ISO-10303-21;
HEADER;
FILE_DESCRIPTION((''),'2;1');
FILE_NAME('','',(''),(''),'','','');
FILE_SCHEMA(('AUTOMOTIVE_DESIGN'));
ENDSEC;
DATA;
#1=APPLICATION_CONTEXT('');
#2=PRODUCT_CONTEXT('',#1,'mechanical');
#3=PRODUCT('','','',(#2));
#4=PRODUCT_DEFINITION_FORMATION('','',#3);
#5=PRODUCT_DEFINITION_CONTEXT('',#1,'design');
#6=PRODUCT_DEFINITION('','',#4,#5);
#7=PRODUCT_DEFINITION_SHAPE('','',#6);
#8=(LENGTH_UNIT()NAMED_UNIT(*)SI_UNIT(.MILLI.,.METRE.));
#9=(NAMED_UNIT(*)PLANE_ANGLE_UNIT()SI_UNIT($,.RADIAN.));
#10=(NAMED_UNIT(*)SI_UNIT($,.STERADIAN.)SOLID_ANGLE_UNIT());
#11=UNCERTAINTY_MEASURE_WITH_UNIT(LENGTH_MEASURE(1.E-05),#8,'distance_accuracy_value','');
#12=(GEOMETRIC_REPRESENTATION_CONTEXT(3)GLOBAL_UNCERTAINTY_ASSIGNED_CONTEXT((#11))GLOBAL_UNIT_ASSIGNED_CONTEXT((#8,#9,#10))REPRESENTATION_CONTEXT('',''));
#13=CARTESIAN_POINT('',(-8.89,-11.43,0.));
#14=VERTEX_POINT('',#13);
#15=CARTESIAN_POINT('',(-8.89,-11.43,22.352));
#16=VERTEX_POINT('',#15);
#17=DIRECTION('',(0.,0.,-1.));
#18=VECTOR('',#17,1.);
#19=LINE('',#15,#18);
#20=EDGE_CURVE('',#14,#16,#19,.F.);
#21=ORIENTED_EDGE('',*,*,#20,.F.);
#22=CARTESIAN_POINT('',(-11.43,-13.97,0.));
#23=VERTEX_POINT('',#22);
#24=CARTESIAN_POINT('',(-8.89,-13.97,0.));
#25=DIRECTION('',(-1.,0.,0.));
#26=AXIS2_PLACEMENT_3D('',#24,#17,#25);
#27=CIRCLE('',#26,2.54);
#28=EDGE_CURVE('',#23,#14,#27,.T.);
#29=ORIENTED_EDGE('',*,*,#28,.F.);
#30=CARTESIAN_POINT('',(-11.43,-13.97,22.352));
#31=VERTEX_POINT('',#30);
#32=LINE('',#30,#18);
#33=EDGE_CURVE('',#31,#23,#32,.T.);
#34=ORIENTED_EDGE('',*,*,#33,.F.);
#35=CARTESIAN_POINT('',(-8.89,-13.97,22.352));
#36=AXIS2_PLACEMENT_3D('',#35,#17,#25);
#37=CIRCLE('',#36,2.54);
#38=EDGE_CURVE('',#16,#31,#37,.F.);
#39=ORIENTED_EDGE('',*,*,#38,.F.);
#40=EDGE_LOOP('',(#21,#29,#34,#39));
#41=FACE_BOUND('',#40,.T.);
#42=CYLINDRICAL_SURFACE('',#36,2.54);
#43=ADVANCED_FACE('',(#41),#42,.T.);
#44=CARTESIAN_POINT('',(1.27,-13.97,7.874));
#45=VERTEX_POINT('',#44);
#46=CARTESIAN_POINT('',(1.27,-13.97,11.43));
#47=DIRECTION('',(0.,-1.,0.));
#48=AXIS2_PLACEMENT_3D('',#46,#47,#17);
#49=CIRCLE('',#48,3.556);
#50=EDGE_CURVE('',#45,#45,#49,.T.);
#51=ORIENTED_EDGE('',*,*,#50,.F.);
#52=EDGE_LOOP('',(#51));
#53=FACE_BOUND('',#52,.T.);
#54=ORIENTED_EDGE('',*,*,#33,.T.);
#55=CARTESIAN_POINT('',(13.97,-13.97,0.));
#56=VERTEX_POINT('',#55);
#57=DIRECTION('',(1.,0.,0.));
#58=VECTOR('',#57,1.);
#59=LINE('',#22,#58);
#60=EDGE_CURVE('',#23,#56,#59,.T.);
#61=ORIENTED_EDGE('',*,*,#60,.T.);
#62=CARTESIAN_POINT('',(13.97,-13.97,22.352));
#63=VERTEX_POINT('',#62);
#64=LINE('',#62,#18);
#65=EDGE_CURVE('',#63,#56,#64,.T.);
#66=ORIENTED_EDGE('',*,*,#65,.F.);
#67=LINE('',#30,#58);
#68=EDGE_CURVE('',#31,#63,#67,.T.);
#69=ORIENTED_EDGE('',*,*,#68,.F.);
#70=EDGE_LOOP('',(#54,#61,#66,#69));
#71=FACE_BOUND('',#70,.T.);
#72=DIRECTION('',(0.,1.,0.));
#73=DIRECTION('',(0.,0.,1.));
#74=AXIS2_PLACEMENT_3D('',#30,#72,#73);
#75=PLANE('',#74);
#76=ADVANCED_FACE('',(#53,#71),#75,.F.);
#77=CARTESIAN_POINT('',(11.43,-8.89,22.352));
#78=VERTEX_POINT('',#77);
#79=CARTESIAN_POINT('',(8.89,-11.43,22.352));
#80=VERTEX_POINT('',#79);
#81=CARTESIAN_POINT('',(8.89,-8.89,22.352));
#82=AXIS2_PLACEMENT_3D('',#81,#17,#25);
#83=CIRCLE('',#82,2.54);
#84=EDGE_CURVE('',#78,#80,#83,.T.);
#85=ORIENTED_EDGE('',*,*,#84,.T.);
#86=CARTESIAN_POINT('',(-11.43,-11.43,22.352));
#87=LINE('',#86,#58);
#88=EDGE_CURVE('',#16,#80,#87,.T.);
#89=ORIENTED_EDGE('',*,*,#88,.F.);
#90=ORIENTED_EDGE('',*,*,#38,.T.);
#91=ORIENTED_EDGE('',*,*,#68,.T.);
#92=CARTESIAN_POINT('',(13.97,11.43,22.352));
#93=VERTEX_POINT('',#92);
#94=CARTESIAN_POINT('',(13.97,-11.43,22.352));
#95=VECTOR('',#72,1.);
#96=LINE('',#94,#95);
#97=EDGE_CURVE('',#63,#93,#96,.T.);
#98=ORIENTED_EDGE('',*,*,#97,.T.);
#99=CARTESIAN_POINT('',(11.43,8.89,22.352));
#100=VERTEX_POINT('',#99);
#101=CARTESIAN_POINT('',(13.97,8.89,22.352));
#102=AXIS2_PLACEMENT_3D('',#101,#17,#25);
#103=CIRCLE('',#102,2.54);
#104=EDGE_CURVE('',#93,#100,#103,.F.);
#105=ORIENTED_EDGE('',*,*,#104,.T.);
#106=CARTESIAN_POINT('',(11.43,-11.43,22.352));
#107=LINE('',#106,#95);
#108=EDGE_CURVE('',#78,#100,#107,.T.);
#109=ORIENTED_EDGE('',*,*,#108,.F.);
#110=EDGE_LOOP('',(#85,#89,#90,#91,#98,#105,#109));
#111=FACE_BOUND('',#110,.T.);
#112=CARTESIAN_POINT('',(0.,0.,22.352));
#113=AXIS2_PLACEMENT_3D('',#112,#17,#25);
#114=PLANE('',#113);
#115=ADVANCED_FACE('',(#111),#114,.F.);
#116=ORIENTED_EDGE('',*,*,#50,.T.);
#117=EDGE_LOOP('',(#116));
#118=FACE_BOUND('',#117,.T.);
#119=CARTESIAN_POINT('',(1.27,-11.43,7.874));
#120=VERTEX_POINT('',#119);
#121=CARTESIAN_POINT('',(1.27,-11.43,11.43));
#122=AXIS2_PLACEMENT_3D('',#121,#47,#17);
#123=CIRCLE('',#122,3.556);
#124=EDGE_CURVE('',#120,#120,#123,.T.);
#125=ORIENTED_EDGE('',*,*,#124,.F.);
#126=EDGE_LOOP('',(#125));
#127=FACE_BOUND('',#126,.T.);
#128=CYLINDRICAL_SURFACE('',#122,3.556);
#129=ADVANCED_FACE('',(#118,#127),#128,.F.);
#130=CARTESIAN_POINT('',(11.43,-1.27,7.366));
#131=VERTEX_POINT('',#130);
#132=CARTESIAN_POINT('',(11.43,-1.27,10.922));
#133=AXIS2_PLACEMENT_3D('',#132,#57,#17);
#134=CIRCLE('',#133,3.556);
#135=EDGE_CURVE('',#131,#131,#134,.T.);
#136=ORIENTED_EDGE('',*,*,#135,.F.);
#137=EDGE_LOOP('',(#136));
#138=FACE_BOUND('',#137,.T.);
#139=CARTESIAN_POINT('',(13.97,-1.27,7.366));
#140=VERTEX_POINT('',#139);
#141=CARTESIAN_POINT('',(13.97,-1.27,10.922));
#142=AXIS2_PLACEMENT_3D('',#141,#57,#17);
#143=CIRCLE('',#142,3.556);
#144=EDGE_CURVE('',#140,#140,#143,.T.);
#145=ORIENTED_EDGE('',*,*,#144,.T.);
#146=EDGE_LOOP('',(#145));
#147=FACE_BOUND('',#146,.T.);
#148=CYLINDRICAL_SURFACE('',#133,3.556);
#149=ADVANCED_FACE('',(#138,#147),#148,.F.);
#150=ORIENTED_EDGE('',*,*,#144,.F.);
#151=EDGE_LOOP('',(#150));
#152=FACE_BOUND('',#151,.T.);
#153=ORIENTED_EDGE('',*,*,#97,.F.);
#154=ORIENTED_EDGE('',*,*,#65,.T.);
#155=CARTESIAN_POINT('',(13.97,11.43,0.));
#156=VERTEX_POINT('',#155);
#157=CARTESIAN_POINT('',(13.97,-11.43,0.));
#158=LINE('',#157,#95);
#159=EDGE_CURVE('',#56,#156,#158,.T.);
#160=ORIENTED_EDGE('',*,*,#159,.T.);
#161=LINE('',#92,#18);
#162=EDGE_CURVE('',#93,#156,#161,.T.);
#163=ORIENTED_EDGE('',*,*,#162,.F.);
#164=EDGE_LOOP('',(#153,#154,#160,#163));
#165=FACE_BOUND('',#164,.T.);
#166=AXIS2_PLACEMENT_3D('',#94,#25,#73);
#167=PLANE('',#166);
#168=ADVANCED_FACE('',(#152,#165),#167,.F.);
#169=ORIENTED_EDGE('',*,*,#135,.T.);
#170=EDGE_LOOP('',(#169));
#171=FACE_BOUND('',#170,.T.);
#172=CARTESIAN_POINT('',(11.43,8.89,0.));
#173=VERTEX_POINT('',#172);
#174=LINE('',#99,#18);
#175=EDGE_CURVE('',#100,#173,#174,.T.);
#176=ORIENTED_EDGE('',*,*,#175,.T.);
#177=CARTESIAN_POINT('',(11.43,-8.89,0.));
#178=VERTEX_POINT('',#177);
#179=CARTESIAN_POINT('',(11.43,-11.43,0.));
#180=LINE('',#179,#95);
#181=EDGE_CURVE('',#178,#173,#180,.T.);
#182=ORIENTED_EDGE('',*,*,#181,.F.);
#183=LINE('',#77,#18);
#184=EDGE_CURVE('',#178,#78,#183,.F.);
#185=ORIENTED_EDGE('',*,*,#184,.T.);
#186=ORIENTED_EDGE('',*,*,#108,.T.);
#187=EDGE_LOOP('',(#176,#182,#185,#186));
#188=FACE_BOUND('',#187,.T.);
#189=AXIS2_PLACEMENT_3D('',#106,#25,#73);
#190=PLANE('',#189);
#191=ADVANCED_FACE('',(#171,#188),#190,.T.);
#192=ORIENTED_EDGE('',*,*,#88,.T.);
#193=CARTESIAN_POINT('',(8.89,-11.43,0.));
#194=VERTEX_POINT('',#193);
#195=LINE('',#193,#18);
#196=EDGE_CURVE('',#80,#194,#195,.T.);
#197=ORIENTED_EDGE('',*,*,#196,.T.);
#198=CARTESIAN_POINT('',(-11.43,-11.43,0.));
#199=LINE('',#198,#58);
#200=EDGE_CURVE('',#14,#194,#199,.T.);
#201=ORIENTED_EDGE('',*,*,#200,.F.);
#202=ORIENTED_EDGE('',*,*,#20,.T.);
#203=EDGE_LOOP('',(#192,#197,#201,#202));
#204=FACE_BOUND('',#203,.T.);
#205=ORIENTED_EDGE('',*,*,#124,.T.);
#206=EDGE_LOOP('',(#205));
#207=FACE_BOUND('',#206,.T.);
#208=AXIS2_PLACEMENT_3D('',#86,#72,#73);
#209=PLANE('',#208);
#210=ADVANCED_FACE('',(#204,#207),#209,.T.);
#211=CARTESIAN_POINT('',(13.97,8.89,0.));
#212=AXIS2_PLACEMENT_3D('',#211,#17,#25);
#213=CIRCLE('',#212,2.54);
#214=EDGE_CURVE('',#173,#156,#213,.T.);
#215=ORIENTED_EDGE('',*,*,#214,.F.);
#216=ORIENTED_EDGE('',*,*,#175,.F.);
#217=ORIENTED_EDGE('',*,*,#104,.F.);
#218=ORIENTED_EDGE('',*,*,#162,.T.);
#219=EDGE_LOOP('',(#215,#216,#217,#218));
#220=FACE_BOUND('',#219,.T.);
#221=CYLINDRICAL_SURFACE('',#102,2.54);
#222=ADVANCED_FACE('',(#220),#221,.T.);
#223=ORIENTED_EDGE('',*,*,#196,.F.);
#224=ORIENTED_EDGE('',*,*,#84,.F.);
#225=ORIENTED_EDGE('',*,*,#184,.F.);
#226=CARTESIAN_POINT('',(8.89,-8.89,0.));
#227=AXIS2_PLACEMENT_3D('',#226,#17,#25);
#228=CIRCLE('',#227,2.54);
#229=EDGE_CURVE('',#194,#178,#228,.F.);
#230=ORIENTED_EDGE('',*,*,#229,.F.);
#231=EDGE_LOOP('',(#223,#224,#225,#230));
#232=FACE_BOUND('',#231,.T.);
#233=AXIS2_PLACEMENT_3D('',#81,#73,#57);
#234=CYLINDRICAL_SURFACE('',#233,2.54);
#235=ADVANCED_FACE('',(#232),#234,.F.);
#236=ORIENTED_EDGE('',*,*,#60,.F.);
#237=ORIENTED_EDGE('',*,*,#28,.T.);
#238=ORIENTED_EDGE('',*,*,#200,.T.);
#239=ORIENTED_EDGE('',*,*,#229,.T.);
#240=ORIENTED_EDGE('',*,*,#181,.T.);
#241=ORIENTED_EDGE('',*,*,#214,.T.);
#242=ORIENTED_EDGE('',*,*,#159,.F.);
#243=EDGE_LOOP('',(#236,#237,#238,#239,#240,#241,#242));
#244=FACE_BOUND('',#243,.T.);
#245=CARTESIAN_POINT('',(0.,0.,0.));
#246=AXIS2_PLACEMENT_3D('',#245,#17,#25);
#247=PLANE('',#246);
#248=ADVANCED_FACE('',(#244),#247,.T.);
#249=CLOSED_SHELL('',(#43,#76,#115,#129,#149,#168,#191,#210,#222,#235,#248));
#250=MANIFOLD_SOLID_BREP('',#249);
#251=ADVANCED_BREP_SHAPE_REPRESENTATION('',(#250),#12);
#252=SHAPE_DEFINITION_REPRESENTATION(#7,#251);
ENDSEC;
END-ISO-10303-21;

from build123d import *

# Parameters (mm, degrees)
EXTRUDE_THIN1_DEPTH = 22.352
FILLET1_R           = 2.54
SKETCH2_R           = 3.556
CUT_EXTRUDE1_DEPTH  = 2.54
SKETCH3_R           = 3.556
CUT_EXTRUDE2_DEPTH  = 2.54


with BuildPart() as part:
    # Sketch1 → Extrude-Thin1 (new body)
    with BuildSketch(Plane.XY):
        Polygon((-11.43, -11.43), (11.43, -11.43), (11.43, 11.43), (13.97, 11.43), (13.97, -13.97), (-11.43, -13.97), align=None)
    extrude(amount=EXTRUDE_THIN1_DEPTH)

    # Fillet1
    fillet1_edges = [part.edges().sort_by_distance(p)[0] for p in [
        (11.43, 11.43, 11.176),
        (-11.43, -11.43, 11.176),
        (11.43, -11.43, 11.176),
    ]]
    fillet(fillet1_edges, radius=FILLET1_R - 0.0001)  # a hair under: the kernel refuses the full size

    # Sketch2 → Cut-Extrude1 (cut)
    with BuildSketch(Plane.XZ.offset(13.97)):
        with Locations(Location((1.27, 11.43, 0), (0, 0, 270))):
            Circle(SKETCH2_R)
    extrude(amount=-CUT_EXTRUDE1_DEPTH, mode=Mode.SUBTRACT)

    # Sketch3 → Cut-Extrude2 (cut)
    with BuildSketch(Plane(origin=(13.97, 0, 0), x_dir=(0, 0, -1), z_dir=(1, 0, 0))):
        with Locations((-10.922, -1.27)):
            Circle(SKETCH3_R)
    extrude(amount=-CUT_EXTRUDE2_DEPTH, mode=Mode.SUBTRACT)


solid = part.part
